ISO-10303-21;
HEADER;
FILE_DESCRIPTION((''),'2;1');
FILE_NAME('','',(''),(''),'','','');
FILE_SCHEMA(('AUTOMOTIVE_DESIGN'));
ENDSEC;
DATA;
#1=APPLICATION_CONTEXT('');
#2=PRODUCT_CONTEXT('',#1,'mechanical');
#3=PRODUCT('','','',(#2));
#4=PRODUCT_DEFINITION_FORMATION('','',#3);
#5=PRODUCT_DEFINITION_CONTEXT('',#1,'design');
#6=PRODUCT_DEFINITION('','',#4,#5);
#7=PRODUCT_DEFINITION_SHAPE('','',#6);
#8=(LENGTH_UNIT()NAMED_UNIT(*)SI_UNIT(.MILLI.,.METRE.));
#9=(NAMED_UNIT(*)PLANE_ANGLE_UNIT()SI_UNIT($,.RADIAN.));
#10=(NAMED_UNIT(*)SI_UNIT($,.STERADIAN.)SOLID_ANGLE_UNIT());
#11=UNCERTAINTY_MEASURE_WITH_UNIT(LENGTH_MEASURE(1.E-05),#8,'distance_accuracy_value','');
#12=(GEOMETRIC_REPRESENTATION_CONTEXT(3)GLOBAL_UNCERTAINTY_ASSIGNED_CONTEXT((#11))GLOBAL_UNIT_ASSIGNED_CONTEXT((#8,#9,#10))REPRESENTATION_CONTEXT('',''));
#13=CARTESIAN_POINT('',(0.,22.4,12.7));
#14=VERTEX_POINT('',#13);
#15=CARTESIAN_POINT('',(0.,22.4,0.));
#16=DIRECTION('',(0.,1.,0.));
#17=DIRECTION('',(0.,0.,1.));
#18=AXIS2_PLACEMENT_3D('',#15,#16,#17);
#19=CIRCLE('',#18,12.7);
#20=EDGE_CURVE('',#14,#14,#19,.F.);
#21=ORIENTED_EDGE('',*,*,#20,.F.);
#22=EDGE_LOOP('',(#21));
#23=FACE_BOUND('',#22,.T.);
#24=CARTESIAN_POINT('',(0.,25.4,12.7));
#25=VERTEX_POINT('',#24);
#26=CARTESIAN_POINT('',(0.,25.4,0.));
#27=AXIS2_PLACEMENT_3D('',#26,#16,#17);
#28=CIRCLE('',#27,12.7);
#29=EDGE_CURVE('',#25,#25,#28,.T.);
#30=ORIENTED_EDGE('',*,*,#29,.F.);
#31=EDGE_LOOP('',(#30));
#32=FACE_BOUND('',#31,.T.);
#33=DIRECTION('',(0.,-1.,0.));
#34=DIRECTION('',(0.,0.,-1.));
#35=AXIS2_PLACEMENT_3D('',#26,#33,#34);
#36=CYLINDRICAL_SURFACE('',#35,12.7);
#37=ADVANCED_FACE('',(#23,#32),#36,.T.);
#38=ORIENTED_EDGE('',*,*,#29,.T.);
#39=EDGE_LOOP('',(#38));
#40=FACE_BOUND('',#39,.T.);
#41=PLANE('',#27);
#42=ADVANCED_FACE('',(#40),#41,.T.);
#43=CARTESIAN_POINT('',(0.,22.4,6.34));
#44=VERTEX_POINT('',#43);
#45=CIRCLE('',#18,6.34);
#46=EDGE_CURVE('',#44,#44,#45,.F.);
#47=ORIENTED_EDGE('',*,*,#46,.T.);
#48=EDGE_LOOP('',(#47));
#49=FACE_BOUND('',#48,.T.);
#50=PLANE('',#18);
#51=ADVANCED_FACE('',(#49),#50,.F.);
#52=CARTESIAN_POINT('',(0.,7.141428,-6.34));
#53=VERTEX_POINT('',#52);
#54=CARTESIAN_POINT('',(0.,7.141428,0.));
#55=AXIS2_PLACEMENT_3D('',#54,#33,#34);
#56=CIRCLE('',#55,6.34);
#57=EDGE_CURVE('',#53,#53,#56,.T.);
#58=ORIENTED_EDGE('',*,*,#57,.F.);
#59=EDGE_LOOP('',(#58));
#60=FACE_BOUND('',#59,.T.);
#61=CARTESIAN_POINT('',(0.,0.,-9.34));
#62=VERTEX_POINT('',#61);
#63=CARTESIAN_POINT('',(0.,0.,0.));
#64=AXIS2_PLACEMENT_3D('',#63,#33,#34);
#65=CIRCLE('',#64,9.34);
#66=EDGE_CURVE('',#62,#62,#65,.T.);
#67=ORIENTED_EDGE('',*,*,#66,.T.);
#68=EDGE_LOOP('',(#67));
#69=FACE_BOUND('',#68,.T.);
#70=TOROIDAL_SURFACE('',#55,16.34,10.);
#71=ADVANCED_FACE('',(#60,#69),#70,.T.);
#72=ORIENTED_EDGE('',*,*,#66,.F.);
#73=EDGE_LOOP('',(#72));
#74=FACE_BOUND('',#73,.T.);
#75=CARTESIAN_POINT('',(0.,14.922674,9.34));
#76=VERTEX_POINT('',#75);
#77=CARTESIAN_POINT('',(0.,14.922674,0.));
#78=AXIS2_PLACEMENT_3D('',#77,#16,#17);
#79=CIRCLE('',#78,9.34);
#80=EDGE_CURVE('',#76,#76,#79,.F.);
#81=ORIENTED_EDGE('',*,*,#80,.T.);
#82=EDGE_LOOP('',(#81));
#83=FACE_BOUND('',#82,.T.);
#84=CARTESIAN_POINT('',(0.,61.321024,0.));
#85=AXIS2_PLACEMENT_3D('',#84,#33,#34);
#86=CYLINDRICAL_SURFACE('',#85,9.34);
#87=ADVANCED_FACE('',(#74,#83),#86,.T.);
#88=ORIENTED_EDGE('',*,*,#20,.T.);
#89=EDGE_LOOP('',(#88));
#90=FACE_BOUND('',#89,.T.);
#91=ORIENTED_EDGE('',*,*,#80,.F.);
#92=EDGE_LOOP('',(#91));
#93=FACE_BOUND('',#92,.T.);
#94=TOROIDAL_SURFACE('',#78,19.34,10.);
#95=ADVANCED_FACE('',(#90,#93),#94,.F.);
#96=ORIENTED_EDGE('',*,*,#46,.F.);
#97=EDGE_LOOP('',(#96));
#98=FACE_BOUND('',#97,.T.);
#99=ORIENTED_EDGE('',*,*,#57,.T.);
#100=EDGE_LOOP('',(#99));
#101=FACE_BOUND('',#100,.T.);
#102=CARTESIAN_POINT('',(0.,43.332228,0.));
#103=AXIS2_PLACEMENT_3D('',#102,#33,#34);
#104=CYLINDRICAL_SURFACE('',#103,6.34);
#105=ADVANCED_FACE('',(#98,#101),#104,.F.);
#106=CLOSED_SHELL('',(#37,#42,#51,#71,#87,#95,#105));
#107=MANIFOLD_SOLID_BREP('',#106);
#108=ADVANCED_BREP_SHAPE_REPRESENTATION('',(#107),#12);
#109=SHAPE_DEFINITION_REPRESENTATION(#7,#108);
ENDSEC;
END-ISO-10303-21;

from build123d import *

# Parameters (mm, degrees)
SKETCH1_R           = 12.699999999999998
BOSS_EXTRUDE1_DEPTH = 25.4
SKETCH2_R           = 6.34
CUT_EXTRUDE1_DEPTH  = 22.4
SKETCH3_R           = 12.7
SKETCH3_R_2         = 9.340000000000002
CUT_EXTRUDE4_DEPTH  = 22.4
FILLET1_R           = 10


with BuildPart() as part:
    # Sketch1 → Boss-Extrude1 (new body)
    with BuildSketch(Plane(origin=(0, 0, 0), x_dir=(1, 0, 0), z_dir=(0, 1, 0))):
        with Locations(Location((0, 0, 0), (0, 0, 270))):
            Circle(SKETCH1_R)
    extrude(amount=BOSS_EXTRUDE1_DEPTH)

    # Sketch2 → Cut-Extrude1 (cut)
    with BuildSketch(Plane.XZ):
        with Locations(Location((0, 0, 0), (0, 0, 270))):
            Circle(SKETCH2_R)
    extrude(amount=-CUT_EXTRUDE1_DEPTH, mode=Mode.SUBTRACT)

    # Sketch3 → Cut-Extrude4 (cut)
    with BuildSketch(Plane.XZ):
        with Locations(Location((0, 0, 0), (0, 0, 90))):
            Circle(SKETCH3_R)
        with Locations(Location((0, 0, 0), (0, 0, 270))):
            Circle(SKETCH3_R_2, mode=Mode.SUBTRACT)
    extrude(amount=-CUT_EXTRUDE4_DEPTH, mode=Mode.SUBTRACT)

    # Fillet1
    # the kernel refuses this fillet: 10 mm, written as the material it adds along each edge
    with BuildSketch(Plane(origin=(0, 22.4, 0), x_dir=(-1.8e-16, 0, -1), z_dir=(-1, 0, 1.8e-16))) as fillet1_piece_1:
        with BuildLine():
            CenterArc((19.340000000000003, 7.477325725150667), FILLET1_R, 180, 48.39434621608348)
            Line((9.340000000000003, 7.477325725150667), (9.140000000000004, 7.477325725150667))
            Line((9.140000000000004, 7.477325725150667), (9.140000000000002, 0))
            Line((9.140000000000002, 0), (9.340000000000002, -0.1999999999999993))
            ThreePointArc((9.340000000000002, -0.1999999999999993), (11.02, -0.1999999999999993), (12.5672, -0.1495465145030117))
            Line((12.5672, -0.1495465145030117), (12.7, 0))
        make_face()
    revolve(axis=Axis((0, 22.4, 0), (0, -1, 0)))
    # the kernel refuses this fillet: 10 mm, written as the material it takes off along each edge
    with BuildSketch(Plane(origin=(0, 0, 0), x_dir=(-1.8e-16, 0, -1), z_dir=(-1, 0, 1.8e-16))) as fillet1_2_piece_1:
        with BuildLine():
            CenterArc((16.339999999999996, -7.141428428542857), FILLET1_R, 134.42700400080568, 45.57299599919432)
            Line((6.339999999999996, -7.141428428542857), (6.139999999999996, -7.141428428542857))
            Line((6.139999999999996, -7.141428428542857), (6.14, 0))
            Line((6.14, 0), (6.34, 0.2))
            ThreePointArc((6.34, 0.2), (7.840000000000001, 0.2), (9.200000000000001, 0.14282856857085713))
            Line((9.200000000000001, 0.14282856857085713), (9.340000000000002, 0))
        make_face()
    revolve(axis=Axis((0, 0, 0), (0, -1, 0)), mode=Mode.SUBTRACT)


solid = part.part
